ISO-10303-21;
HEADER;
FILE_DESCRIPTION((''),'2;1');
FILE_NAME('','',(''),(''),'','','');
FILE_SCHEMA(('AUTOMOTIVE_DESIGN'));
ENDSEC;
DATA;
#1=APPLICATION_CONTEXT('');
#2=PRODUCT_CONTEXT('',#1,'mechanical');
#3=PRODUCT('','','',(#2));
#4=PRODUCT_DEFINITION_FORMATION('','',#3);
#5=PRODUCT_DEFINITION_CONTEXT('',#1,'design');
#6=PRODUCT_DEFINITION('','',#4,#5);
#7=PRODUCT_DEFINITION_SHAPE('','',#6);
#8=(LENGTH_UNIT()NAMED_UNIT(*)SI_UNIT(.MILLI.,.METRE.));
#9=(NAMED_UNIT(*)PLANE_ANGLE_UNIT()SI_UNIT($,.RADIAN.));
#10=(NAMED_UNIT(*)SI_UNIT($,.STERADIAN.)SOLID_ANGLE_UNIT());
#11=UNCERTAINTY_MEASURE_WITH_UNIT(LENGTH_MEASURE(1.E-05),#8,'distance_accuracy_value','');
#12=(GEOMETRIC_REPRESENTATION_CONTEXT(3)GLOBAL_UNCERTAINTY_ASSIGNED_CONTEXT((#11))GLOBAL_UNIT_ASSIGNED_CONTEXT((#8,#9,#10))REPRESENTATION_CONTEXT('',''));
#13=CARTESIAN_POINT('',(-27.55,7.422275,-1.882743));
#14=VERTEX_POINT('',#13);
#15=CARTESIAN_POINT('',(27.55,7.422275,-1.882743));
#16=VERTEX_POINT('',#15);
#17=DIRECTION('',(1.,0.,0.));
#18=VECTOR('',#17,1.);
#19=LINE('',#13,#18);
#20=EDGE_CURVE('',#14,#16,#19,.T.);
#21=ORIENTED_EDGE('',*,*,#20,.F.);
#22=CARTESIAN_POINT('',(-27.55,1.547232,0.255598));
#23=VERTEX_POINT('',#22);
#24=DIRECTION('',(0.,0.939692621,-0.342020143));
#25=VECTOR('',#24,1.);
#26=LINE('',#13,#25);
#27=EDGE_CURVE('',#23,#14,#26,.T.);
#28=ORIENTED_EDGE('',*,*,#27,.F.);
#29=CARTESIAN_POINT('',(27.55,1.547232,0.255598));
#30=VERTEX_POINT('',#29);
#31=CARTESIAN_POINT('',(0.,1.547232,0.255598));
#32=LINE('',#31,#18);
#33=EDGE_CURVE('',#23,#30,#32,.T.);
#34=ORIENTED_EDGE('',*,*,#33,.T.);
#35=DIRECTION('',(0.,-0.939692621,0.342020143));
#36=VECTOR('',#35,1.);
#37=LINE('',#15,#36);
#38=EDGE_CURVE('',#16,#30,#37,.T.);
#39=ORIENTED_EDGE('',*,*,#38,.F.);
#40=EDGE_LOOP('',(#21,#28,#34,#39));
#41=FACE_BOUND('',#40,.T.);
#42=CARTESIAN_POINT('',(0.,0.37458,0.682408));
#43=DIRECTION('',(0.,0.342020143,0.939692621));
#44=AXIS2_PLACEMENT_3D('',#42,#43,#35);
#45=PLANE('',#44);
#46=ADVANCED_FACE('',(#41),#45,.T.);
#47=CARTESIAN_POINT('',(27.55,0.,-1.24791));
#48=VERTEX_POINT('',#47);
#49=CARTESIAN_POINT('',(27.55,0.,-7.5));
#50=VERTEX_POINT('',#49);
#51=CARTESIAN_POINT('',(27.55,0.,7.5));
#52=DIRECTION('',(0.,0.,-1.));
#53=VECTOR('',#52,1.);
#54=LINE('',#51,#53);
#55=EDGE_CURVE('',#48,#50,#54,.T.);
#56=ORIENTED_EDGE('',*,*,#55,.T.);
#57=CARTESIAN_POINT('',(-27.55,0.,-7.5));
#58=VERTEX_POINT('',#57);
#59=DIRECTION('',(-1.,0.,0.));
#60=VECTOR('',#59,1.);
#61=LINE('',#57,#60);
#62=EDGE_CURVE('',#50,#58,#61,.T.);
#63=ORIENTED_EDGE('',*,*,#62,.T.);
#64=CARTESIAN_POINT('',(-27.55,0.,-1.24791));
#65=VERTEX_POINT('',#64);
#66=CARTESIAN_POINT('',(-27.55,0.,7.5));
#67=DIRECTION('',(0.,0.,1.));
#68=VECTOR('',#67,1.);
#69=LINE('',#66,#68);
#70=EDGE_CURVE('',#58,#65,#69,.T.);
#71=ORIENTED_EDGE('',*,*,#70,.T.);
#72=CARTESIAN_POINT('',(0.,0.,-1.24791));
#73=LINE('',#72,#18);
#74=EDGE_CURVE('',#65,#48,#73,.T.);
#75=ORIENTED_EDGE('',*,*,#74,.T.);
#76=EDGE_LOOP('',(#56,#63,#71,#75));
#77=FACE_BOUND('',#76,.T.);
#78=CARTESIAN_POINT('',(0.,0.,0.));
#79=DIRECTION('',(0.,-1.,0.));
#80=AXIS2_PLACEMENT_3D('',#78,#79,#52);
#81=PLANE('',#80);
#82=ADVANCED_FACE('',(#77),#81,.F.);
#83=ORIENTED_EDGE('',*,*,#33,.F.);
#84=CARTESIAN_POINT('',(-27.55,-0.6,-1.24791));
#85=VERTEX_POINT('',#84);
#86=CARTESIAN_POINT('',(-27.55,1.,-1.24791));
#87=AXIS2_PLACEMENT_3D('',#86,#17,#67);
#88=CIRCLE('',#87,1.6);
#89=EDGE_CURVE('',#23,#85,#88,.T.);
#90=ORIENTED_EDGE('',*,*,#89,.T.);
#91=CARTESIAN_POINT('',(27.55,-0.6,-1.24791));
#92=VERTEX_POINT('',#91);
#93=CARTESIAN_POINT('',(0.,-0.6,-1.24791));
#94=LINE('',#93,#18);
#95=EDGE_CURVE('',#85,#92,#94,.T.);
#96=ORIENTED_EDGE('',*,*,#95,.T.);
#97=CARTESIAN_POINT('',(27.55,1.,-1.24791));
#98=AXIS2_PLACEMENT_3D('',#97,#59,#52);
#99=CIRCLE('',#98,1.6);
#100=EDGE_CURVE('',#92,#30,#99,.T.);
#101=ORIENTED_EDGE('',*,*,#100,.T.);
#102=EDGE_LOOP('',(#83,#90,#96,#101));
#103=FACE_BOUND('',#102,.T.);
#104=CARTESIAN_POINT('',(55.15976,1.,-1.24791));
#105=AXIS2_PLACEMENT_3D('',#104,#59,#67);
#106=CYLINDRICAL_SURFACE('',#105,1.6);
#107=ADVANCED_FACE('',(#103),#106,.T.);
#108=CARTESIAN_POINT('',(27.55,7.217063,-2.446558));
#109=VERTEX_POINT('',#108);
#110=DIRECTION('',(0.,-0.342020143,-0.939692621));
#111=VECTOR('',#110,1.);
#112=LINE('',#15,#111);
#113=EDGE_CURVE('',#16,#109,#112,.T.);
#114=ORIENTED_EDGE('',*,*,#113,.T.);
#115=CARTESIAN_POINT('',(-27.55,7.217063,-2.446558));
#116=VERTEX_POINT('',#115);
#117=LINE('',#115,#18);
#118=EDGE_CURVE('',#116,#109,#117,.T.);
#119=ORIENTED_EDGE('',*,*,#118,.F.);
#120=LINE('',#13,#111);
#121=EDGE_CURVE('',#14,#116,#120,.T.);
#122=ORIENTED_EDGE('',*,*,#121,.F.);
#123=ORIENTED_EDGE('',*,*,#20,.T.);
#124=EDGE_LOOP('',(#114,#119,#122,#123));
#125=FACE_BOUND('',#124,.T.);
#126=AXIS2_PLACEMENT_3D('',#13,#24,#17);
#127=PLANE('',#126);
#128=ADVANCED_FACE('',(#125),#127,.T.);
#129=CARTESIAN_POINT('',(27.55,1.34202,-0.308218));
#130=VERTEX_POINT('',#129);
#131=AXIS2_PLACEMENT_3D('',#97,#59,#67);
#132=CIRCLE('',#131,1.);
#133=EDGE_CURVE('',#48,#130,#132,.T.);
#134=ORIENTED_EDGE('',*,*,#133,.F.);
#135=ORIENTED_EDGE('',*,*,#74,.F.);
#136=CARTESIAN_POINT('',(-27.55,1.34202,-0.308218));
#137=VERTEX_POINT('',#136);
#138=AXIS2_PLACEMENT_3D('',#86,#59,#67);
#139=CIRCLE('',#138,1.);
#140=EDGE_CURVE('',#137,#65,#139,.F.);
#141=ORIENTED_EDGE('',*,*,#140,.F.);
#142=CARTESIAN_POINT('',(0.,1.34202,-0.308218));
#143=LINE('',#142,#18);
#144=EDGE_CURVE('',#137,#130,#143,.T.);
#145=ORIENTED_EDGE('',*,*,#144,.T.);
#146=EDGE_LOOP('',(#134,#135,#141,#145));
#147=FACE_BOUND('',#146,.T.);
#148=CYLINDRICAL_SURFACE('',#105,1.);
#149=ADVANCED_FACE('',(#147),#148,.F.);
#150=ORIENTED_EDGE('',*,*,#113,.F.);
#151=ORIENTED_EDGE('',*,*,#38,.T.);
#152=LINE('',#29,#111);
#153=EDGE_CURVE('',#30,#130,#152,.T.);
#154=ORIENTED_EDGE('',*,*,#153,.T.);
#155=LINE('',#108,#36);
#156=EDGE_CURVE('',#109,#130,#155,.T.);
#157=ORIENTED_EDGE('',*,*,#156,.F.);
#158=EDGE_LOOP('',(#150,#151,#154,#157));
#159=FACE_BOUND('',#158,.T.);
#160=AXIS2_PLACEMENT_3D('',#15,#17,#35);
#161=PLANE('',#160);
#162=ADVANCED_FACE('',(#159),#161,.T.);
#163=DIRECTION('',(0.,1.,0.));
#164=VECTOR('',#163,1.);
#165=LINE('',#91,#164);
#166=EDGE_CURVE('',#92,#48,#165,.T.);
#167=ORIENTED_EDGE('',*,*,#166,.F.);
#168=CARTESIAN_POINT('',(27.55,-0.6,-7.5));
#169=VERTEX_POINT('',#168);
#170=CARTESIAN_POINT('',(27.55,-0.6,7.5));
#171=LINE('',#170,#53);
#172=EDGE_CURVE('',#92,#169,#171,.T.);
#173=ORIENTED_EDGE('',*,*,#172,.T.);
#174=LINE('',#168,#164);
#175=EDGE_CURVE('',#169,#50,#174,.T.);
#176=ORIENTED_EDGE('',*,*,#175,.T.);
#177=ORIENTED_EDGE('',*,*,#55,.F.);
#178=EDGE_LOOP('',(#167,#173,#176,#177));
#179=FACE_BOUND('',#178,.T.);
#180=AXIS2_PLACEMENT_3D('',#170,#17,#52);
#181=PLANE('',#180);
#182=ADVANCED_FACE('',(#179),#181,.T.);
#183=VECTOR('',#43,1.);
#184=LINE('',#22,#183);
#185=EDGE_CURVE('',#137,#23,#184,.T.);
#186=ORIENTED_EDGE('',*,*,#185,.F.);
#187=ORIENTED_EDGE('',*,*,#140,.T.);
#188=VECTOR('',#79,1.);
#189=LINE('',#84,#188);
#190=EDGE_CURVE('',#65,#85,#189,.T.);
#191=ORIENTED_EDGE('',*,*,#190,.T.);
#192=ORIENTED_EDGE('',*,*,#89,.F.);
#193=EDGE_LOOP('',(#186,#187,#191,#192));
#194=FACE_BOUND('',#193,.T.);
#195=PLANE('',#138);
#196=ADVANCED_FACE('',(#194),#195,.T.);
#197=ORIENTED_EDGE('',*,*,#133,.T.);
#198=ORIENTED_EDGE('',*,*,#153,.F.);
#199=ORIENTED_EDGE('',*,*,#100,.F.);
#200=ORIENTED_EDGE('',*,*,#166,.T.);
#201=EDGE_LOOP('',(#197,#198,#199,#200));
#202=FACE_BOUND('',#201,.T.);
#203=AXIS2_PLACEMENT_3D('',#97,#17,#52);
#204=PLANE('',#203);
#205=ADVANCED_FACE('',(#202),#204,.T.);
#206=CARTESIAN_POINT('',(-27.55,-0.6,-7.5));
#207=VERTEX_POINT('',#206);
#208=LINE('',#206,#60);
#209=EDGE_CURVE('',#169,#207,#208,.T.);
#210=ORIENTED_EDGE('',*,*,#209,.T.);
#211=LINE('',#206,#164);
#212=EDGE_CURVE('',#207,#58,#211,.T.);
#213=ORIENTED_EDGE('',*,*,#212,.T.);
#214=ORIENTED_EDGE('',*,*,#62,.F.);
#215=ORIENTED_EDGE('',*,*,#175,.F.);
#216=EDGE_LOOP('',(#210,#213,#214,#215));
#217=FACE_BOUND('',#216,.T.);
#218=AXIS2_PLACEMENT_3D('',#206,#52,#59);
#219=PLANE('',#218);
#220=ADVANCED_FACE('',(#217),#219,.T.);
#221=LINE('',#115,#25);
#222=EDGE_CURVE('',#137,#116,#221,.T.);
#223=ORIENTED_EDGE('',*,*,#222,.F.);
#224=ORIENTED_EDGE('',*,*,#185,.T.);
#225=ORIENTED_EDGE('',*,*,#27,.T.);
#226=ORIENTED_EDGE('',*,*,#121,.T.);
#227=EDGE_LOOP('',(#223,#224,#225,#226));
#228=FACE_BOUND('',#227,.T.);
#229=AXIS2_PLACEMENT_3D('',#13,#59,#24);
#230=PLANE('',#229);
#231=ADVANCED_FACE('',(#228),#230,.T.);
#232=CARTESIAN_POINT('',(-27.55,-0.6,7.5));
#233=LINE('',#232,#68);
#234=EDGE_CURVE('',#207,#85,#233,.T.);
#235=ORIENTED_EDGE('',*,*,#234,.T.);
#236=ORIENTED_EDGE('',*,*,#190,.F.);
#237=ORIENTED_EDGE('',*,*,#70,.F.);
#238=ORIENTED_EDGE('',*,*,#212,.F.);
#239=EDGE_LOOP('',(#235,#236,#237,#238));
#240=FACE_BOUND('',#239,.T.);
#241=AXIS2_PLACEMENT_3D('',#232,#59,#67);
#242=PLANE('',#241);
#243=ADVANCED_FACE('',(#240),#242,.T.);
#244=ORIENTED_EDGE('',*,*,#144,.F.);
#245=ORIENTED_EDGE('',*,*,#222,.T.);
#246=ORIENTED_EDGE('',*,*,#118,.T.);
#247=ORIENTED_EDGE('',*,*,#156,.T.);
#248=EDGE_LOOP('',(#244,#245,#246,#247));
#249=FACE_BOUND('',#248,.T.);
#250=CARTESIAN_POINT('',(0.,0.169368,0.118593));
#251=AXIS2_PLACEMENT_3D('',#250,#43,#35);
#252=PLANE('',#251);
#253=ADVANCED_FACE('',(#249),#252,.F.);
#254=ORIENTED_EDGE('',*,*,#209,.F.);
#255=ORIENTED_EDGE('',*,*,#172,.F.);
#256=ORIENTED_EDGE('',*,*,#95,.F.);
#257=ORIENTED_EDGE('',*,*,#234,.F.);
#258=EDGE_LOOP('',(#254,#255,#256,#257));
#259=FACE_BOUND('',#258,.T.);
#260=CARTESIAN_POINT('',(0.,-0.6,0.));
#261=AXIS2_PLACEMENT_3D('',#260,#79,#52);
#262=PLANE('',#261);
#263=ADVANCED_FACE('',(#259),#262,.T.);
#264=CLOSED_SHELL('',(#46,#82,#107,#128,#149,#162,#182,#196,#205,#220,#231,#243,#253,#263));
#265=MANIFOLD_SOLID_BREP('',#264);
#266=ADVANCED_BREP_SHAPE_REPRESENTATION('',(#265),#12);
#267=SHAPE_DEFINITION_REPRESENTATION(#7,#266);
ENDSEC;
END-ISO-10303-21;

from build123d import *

# Parameters (mm, degrees)
SKETCH5_W              = 55.1
SKETCH5_H              = 15
BASE_FLANGE1_DEPTH     = 0.6
SKETCHED_START         = -27.55
SKETCHED_BEND2_DEPTH   = 55.1
SKETCHED_BEND2_2_DEPTH = 55.1


# Read off the part's stored shape, not the designer's step: Sketched Bend2
# Sheet-metal steps are written as plain solids
with BuildPart() as part:
    # Sketch5 → Base-Flange1 (new body)
    with BuildSketch(Plane(origin=(0, 0, 0), x_dir=(1, 0, 0), z_dir=(0, 1, 0))):
        Rectangle(SKETCH5_W, SKETCH5_H)
    extrude(amount=-BASE_FLANGE1_DEPTH)

    # Sketched Bend2 outline → Sketched Bend2 (cut)
    with BuildSketch(Plane.YZ.offset(SKETCHED_START)):
        with BuildLine():
            ThreePointArc((-0.6, -1.247910415), (-0.44222051, -0.555090092), (0, 0.001089185))
            Line((0, 0.001089185), (0, 7.5))
            Line((0, 7.5), (-0.6, 7.5))
            Line((-0.6, 7.5), (-0.6, -1.247910415))
        make_face()
    extrude(amount=SKETCHED_BEND2_DEPTH, mode=Mode.SUBTRACT)

    # Sketched Bend2 2 outline → Sketched Bend2 2 (add)
    with BuildSketch(Plane.YZ.offset(SKETCHED_START)):
        with BuildLine():
            Line((7.217062591, -2.44655837), (7.422274677, -1.882742798))
            Line((7.422274677, -1.882742798), (1.547232229, 0.255597778))
            ThreePointArc((1.547232229, 0.255597778), (0.740301483, 0.330872876), (0, 0.001089185))
            Line((0, 0.001089185), (0, -1.247910415))
            ThreePointArc((0, -1.247910415), (0.426423564, -0.428758371), (1.342020143, -0.308217794))
            Line((1.342020143, -0.308217794), (7.217062591, -2.44655837))
        make_face()
    extrude(amount=SKETCHED_BEND2_2_DEPTH)


solid = part.part
